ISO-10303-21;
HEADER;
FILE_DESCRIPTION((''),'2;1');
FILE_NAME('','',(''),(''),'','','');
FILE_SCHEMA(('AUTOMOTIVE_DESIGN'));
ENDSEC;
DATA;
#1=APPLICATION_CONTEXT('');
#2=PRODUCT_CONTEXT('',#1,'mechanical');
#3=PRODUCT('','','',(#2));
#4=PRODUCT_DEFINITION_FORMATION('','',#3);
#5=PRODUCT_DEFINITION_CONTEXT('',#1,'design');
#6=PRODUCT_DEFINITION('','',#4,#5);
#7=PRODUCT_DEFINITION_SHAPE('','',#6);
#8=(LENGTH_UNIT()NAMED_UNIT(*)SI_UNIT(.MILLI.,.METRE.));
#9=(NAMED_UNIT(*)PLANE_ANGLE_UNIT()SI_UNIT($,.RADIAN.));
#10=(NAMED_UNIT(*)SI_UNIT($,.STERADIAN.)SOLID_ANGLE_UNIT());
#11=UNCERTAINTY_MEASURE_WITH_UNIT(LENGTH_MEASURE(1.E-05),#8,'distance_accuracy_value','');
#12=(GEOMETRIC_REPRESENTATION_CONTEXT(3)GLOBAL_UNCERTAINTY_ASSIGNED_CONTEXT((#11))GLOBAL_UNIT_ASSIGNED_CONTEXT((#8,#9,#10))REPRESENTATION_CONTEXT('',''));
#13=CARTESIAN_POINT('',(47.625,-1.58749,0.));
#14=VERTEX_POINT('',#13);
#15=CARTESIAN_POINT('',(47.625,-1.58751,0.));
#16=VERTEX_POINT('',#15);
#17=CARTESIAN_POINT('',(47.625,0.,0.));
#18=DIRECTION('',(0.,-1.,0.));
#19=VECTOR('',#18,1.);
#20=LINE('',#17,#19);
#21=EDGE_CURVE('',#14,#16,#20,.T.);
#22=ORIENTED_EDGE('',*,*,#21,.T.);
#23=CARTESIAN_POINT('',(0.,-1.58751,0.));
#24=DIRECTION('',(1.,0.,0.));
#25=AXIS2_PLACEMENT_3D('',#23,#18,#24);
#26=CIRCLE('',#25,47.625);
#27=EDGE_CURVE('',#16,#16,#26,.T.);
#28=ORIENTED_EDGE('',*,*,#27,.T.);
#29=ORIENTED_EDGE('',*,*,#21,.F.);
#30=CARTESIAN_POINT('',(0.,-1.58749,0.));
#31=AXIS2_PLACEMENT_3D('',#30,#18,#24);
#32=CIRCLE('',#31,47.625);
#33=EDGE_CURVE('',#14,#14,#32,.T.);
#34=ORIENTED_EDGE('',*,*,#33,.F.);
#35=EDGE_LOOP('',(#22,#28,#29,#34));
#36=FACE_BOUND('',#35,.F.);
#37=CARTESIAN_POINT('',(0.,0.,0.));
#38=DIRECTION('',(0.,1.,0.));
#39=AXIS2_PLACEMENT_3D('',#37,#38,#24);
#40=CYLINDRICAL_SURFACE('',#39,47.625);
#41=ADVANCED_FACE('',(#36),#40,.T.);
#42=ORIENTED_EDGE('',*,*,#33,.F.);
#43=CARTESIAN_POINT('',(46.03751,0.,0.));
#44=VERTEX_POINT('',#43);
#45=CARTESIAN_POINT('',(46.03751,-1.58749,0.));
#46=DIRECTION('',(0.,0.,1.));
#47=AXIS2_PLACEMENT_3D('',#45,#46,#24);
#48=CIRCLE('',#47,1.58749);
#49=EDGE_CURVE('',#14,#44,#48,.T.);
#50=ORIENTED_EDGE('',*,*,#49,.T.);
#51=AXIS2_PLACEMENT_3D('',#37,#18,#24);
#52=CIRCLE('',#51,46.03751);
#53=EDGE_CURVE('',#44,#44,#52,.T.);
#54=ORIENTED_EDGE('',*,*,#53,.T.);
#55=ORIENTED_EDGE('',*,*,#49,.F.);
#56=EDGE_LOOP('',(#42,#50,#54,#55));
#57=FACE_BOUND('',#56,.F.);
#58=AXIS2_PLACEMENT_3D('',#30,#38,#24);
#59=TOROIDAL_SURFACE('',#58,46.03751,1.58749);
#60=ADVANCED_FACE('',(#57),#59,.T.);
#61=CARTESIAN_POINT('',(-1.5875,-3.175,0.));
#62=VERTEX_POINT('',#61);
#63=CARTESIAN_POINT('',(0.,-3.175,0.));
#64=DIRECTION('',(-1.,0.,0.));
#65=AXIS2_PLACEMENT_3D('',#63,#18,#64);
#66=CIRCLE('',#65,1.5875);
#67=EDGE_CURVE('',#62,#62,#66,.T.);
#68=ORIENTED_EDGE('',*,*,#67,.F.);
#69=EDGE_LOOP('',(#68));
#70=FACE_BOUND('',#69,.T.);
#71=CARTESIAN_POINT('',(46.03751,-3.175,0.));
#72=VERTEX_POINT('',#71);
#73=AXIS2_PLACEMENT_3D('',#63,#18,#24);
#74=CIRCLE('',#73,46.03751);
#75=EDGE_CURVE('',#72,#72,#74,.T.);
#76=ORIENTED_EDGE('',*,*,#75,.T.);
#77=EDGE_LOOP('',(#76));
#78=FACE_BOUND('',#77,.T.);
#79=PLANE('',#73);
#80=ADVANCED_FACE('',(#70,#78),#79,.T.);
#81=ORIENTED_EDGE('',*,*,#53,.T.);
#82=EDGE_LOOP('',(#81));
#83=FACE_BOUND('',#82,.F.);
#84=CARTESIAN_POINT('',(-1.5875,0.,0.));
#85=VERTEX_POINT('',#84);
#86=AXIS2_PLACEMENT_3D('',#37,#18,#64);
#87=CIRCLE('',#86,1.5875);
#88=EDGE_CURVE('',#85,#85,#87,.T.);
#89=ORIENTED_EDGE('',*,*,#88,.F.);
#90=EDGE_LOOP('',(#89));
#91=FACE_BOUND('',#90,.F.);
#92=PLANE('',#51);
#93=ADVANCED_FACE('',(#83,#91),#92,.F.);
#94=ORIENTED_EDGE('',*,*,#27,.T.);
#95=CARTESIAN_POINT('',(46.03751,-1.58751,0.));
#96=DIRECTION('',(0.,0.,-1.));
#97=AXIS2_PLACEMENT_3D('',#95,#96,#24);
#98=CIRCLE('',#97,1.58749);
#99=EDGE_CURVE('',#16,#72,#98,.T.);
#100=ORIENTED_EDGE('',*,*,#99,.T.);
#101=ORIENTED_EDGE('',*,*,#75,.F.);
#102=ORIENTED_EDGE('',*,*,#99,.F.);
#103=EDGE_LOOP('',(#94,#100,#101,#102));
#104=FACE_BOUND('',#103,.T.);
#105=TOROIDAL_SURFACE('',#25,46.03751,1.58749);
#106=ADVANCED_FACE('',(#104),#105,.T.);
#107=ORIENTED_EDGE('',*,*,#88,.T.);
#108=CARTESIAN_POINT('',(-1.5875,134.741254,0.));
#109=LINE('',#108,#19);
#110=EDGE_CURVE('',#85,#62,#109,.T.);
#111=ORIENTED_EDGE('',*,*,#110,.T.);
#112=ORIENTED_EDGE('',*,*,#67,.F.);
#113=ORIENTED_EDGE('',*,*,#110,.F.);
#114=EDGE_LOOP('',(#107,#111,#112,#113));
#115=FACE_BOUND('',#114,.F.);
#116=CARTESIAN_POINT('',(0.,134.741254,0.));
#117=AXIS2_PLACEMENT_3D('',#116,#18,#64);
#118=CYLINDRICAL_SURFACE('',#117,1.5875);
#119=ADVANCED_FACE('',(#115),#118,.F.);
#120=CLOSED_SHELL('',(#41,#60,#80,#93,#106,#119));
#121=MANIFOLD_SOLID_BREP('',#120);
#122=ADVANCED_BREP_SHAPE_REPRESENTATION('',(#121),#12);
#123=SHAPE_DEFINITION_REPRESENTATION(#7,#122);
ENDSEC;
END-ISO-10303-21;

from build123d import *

# Parameters (mm, degrees)
F0_R     = 47.625
F1_DEPTH = 3.175
F2_R     = 1.58749
F3_D     = 3.175


# Not quite as in the source:
# - a fillet or chamfer is up to 0.001 mm smaller than in the source, because OpenCascade refuses the exact size


with BuildPart() as f1:
    # F0 (on Front) → F1 (new body)
    with BuildSketch(Plane.XZ):
        Circle(F0_R)
    extrude(amount=F1_DEPTH)

    # F2 (radius 1.5875 in the source; OpenCascade refuses exactly that, so slightly less here)
    f2_edges = [f1.edges().sort_by_distance(p)[0] for p in [
        (-47.625, -3.175, 0),
        (-47.625, 0, 0),
    ]]
    fillet(f2_edges, radius=F2_R)

    # F3 (through all)
    with Locations(Plane(origin=(0, 0, 0), x_dir=(1, 0, 0), z_dir=(0, 1, 0))):
        with Locations((0, 0)):
            Hole(F3_D / 2)


solid = f1.part
